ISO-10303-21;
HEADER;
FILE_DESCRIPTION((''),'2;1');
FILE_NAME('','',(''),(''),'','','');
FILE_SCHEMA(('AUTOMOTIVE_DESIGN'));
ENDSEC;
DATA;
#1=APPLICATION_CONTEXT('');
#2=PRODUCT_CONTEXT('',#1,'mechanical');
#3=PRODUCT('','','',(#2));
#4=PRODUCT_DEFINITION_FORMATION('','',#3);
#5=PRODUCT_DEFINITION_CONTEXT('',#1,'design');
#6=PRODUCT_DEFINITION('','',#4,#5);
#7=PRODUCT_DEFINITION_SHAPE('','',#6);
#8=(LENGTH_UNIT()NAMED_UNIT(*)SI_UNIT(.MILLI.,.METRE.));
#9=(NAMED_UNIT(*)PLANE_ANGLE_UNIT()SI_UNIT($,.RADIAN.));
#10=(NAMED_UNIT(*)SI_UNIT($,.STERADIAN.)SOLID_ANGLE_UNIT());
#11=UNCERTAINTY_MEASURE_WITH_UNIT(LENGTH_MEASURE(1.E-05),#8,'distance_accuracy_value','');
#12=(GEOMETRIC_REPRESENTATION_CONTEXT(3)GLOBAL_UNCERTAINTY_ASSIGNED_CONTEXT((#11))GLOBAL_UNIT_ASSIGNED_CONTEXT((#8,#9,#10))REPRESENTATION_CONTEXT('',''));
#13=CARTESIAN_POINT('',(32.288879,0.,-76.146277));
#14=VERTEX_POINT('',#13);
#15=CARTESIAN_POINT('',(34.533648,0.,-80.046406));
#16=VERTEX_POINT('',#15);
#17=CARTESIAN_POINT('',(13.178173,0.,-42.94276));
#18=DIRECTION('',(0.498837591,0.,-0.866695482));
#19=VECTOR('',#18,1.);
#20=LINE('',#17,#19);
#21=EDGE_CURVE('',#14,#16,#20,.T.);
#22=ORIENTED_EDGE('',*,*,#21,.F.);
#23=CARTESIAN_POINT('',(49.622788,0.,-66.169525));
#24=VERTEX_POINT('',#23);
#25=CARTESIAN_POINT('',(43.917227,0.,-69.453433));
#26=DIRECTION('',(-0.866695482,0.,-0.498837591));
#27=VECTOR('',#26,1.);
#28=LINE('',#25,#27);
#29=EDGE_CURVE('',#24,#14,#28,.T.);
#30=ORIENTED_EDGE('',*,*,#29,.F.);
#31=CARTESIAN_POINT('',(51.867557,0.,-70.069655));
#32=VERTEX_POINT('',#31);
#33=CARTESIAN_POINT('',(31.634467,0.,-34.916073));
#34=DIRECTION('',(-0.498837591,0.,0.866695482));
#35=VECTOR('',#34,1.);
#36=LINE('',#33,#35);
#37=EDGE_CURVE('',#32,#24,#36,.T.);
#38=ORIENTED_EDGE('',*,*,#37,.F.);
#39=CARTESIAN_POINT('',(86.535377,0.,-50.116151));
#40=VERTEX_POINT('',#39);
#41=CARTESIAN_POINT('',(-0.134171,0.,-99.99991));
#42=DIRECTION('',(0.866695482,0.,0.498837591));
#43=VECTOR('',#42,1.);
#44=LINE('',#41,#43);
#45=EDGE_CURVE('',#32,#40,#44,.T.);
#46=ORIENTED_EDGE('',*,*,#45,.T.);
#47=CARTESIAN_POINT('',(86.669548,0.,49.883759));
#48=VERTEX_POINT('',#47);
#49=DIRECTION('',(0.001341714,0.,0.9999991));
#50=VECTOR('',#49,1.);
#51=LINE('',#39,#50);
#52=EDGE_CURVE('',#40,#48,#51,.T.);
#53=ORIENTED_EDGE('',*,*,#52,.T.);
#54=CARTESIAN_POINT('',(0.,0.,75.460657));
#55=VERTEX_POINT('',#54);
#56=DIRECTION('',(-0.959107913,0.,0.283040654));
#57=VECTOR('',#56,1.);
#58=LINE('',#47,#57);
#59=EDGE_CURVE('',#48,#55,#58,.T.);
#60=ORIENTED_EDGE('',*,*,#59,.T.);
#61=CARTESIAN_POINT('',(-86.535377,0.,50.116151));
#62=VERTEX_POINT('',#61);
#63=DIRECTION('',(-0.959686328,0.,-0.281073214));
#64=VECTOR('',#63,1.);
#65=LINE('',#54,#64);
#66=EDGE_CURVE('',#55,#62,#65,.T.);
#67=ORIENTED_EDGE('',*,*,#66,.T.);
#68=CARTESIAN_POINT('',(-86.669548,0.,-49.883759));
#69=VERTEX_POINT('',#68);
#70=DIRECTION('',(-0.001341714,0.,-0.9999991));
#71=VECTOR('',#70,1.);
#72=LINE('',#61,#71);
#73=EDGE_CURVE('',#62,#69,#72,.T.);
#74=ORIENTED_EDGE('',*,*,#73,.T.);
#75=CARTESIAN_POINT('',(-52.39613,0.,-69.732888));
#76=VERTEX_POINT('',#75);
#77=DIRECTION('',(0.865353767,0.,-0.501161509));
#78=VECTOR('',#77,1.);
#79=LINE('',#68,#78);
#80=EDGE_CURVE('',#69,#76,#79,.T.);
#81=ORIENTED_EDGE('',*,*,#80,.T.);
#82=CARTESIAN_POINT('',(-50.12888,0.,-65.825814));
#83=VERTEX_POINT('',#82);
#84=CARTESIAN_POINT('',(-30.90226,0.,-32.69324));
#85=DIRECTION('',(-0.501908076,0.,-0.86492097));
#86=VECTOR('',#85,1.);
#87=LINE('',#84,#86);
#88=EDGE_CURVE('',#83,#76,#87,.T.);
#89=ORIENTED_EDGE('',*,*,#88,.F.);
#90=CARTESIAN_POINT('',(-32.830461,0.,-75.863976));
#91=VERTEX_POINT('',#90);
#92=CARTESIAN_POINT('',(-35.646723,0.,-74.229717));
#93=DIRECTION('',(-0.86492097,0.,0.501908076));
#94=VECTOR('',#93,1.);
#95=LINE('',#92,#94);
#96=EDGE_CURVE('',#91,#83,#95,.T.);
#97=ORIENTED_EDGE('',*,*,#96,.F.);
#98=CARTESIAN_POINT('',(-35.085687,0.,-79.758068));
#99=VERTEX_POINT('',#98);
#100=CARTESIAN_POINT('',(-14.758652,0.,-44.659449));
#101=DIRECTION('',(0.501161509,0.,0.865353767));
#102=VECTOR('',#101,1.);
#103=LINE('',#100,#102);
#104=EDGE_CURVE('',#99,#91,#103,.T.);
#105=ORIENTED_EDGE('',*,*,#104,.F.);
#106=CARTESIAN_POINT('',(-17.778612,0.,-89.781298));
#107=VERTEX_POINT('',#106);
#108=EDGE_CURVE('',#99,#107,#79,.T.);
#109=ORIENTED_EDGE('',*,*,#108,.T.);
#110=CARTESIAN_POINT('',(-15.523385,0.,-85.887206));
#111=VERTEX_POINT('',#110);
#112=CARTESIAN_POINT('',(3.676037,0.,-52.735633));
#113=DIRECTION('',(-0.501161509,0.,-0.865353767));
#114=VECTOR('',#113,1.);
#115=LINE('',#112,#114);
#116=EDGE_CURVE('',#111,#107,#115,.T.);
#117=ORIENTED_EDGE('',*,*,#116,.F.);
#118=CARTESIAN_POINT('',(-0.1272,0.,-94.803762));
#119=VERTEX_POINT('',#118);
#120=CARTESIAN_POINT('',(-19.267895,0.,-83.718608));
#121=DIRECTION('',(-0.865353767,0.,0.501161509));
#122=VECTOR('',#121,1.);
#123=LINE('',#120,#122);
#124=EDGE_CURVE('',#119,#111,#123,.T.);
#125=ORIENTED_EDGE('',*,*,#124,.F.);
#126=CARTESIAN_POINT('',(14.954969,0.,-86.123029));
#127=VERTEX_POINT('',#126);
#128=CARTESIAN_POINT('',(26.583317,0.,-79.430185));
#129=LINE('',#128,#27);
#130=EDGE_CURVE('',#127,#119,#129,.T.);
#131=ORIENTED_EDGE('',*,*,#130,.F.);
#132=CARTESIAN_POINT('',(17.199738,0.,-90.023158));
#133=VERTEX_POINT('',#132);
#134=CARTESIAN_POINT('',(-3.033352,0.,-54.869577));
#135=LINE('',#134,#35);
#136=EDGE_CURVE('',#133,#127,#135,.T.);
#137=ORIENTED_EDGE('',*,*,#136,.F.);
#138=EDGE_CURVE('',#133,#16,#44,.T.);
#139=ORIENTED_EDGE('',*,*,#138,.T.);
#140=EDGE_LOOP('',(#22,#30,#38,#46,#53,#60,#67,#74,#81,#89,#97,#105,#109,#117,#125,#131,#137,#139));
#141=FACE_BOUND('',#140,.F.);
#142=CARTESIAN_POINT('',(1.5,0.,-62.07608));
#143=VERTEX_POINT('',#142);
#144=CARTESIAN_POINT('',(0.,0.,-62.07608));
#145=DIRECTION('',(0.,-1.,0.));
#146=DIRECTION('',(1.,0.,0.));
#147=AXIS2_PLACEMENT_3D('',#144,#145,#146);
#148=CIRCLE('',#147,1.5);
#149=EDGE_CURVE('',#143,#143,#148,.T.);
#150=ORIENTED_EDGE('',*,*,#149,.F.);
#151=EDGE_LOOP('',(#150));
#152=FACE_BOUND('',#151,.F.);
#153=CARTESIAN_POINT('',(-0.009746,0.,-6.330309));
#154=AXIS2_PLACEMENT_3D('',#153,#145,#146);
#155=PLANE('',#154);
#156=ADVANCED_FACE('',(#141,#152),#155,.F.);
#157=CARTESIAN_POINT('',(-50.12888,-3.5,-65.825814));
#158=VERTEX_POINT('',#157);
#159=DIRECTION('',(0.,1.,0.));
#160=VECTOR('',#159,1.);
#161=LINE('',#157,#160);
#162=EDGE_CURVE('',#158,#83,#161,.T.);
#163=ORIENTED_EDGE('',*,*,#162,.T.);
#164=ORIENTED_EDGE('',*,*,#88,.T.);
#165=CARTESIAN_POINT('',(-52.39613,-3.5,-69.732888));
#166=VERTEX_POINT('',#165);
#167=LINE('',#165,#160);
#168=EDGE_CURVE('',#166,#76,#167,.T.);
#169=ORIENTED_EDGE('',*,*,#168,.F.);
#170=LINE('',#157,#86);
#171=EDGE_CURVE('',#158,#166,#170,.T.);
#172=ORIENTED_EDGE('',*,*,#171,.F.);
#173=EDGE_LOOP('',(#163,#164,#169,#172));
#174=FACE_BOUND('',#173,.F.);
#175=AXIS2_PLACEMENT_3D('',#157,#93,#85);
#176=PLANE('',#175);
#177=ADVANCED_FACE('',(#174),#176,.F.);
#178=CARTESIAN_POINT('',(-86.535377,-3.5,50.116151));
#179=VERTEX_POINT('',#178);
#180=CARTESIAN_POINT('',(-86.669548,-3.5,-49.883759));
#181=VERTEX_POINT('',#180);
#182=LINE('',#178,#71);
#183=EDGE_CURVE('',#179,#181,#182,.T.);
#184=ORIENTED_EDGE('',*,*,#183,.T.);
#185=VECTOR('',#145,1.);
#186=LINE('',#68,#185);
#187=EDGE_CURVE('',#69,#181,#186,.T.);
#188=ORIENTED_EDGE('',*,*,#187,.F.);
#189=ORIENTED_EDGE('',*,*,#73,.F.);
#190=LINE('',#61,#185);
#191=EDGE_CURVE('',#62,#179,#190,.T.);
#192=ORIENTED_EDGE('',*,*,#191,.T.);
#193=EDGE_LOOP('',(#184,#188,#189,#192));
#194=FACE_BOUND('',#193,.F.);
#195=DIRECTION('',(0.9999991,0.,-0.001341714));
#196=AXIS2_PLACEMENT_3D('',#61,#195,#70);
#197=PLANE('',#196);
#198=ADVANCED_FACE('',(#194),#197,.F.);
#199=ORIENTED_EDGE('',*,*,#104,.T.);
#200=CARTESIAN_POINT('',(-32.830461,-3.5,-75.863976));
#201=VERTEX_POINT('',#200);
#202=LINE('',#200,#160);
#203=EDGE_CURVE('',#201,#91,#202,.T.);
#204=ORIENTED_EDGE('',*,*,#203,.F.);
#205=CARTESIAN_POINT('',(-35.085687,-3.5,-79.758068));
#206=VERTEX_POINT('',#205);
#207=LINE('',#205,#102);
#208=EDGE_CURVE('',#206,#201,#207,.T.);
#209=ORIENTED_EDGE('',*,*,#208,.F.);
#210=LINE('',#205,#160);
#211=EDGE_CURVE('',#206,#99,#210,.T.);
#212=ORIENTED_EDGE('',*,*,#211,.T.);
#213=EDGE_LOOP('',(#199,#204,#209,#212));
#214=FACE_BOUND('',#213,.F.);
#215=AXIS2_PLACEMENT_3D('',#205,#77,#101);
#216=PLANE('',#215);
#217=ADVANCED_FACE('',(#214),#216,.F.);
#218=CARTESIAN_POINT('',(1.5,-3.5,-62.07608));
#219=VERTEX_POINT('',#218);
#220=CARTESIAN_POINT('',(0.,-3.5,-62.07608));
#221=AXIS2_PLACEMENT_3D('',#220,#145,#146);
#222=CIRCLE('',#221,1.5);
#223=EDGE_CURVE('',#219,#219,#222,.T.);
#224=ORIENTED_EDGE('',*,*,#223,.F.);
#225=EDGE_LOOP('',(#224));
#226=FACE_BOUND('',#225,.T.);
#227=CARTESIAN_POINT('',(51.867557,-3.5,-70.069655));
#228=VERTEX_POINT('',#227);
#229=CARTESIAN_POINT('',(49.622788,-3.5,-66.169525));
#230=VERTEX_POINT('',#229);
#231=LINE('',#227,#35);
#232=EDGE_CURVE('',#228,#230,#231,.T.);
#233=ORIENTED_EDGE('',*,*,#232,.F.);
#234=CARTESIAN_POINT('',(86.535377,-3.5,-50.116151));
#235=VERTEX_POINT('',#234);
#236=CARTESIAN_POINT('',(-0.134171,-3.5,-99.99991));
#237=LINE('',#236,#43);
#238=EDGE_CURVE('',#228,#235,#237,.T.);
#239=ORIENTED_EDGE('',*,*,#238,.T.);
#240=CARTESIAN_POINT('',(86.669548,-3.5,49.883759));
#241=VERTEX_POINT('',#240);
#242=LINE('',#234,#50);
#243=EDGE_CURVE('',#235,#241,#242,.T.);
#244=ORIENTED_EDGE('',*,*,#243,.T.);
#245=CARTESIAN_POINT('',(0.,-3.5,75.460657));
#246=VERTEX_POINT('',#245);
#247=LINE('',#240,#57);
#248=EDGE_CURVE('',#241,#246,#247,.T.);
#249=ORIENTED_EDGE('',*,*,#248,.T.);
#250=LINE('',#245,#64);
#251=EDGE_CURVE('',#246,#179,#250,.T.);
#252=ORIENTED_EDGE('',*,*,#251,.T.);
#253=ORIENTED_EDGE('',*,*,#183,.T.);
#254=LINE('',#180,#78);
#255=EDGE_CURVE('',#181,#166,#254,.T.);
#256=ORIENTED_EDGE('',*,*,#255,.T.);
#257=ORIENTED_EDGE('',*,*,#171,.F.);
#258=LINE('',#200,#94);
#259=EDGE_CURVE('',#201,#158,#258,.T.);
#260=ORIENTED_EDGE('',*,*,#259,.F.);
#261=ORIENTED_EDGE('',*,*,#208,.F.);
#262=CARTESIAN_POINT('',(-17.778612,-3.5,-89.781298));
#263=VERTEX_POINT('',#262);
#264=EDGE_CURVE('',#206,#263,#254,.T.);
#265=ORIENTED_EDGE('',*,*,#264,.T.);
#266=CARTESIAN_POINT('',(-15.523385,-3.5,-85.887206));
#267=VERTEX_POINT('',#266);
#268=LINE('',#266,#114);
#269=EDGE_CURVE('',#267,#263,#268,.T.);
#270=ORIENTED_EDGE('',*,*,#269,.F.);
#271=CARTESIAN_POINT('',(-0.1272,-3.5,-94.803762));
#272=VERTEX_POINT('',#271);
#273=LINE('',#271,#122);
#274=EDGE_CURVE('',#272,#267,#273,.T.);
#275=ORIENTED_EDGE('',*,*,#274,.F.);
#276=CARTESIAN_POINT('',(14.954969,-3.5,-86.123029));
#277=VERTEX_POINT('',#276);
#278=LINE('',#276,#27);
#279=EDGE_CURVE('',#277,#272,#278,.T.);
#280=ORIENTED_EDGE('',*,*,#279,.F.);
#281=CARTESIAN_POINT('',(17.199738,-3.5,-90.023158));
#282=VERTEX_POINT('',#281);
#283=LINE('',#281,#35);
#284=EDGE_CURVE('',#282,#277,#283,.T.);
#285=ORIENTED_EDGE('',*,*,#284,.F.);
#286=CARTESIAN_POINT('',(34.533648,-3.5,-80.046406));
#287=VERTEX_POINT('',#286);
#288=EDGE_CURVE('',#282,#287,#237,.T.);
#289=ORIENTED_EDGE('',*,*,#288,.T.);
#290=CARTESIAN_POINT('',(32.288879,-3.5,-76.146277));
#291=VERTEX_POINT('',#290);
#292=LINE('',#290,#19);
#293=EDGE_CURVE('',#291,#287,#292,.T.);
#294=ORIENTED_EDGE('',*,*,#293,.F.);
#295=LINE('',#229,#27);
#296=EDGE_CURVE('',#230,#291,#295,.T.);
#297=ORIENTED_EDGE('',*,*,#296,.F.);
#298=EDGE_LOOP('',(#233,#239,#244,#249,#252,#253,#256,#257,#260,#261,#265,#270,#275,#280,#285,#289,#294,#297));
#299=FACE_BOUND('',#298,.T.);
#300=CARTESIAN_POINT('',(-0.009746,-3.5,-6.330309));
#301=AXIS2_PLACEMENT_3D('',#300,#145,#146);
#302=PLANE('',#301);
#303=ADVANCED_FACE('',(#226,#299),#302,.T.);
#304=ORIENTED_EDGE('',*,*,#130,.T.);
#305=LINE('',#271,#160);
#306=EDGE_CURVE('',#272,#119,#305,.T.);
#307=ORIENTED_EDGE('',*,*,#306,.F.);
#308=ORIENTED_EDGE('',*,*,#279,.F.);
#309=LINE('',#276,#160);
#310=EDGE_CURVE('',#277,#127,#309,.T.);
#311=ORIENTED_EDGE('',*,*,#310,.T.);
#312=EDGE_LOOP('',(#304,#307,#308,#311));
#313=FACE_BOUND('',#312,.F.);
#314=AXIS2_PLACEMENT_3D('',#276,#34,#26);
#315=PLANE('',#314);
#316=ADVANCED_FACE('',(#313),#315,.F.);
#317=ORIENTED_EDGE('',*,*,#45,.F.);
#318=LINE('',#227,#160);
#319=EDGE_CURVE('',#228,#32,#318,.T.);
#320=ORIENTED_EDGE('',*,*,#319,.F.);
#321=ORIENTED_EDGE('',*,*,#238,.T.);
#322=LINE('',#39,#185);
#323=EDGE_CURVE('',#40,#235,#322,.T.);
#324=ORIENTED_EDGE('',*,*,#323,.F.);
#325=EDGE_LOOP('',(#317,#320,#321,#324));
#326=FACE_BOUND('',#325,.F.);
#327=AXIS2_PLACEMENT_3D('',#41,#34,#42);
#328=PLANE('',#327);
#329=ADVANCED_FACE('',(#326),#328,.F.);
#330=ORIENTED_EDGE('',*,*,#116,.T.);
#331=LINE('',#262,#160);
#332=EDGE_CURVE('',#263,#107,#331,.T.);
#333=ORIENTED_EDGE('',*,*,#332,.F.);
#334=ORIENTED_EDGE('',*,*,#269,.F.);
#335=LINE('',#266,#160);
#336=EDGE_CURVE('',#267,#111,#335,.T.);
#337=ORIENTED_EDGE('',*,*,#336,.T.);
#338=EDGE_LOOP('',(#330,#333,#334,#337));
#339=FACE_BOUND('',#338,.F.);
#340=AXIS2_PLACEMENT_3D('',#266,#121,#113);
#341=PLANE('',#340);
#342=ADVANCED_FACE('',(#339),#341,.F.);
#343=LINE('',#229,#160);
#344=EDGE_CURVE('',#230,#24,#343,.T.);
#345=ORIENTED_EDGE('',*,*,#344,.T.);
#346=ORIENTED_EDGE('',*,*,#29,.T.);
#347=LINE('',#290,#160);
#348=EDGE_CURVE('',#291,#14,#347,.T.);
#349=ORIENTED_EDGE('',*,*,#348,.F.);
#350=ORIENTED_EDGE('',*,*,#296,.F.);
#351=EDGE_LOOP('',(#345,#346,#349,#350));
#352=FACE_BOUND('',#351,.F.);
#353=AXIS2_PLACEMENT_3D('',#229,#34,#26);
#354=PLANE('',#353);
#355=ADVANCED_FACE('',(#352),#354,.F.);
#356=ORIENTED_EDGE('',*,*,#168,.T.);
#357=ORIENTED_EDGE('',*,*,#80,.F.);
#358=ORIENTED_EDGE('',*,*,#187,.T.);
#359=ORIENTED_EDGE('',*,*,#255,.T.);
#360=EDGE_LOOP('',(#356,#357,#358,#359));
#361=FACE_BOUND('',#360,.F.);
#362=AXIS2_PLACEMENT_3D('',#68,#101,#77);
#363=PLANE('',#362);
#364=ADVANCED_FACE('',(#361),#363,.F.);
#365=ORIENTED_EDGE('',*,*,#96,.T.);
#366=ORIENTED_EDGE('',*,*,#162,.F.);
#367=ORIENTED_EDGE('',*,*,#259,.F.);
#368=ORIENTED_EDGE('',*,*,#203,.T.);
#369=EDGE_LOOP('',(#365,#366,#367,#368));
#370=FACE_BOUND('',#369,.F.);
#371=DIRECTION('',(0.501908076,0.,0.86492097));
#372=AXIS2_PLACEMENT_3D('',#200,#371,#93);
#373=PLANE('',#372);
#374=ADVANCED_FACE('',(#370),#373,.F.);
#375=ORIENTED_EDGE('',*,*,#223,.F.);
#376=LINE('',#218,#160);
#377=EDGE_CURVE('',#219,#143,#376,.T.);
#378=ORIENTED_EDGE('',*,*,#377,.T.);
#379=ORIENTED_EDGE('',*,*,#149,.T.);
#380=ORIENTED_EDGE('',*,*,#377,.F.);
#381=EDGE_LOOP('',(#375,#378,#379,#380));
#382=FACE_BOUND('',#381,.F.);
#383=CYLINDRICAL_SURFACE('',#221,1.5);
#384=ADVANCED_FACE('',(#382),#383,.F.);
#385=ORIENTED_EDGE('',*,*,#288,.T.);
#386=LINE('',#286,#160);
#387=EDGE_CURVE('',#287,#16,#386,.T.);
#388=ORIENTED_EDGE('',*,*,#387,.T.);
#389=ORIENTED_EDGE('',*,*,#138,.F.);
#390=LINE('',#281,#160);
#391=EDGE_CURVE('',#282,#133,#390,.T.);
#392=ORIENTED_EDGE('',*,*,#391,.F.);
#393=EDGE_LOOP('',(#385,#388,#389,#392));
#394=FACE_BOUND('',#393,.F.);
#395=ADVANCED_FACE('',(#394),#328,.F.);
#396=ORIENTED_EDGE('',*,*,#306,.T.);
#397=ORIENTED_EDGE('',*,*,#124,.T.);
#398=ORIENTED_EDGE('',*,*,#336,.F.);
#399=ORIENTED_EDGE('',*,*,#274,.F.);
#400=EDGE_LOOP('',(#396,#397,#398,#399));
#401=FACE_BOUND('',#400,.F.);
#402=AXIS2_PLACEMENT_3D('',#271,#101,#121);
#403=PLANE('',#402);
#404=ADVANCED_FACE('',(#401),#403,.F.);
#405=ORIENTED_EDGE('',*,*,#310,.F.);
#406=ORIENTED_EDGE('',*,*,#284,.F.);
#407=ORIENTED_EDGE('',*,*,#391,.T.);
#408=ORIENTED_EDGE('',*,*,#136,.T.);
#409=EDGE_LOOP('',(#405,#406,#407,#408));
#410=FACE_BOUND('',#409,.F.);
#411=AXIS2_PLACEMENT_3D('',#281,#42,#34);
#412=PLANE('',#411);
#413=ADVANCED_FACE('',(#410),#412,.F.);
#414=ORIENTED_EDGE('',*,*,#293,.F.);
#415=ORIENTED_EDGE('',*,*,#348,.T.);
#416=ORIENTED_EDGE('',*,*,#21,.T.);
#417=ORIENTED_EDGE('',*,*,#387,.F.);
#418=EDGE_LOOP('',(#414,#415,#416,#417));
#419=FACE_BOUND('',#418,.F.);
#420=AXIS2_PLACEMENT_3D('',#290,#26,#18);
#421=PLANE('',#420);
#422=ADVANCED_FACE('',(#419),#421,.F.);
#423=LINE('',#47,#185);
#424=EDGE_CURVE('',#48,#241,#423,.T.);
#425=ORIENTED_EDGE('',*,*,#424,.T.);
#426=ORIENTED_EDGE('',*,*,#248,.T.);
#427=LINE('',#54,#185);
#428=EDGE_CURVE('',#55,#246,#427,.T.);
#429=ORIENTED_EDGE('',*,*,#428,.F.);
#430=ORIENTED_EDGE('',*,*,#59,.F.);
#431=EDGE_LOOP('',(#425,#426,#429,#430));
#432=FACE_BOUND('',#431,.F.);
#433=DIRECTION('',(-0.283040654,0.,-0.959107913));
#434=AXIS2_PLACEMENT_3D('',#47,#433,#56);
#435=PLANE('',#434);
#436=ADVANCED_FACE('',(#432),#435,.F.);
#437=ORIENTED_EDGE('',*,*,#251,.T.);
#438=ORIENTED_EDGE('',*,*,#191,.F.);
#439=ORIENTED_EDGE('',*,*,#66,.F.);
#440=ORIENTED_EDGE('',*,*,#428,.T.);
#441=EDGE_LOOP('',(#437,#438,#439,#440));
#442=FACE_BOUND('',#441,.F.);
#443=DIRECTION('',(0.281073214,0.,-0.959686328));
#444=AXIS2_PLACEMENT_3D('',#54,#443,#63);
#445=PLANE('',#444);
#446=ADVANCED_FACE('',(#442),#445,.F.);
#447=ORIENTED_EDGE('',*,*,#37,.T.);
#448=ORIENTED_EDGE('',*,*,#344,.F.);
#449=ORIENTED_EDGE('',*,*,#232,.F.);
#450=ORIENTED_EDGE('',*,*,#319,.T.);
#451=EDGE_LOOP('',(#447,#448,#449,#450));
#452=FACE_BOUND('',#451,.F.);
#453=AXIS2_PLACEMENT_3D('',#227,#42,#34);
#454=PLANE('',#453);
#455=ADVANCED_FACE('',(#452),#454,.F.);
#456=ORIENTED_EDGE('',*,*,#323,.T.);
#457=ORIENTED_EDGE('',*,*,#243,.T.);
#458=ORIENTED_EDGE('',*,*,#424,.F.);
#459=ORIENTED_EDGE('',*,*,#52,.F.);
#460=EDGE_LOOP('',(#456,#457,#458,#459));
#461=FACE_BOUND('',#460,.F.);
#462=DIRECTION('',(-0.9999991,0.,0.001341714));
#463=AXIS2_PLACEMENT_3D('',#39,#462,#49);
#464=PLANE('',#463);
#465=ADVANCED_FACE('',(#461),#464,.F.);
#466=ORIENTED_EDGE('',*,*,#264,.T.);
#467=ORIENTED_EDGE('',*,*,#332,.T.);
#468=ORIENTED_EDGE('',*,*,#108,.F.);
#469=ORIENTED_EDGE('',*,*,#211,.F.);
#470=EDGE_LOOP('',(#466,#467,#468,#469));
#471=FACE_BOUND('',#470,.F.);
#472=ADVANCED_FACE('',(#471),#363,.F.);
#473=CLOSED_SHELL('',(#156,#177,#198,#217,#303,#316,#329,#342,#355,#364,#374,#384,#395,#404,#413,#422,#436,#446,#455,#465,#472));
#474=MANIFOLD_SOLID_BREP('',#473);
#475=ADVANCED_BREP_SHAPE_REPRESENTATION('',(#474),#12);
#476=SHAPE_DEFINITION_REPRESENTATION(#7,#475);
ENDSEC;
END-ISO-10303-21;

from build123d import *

# Parameters (mm, degrees)
F1_DEPTH = 3.5
F2_R     = 1.5
F3_DEPTH = 25


# Not quite as in the source:
# - a feature names something its author has since deleted; it is built from what else it names


with BuildPart() as f1:
    # F0 (on Front) → F1 (new body)
    with BuildSketch(Plane.XZ):
        Polygon((0, 75.4606574774), (-86.5353767039, 50.1161508768), (-86.6695481512, -49.8837591133), (-0.1341714472, -99.9999099901), (86.5353767039, -50.1161508768), (86.6695481512, 49.8837591133), align=None)
    extrude(amount=F1_DEPTH)

    # F2 (on face) → F3 (cut)
    with BuildSketch(Plane.XZ.offset(3.5)):
        Polygon((0.1341714472, 99.9999099901), (-17.199738183, 90.0231581674), (-14.9549690229, 86.1230285006), (0.1271996943, 94.8037622444), (-2.1236443549, 96.1073174408), align=None)
        Polygon((17.4386577754, 89.9781792171), (0.1341714472, 99.9999099901), (2.3789406073, 96.0997803233), (0.1271996943, 94.8037622444), (15.1834309859, 86.0840872654), align=None)
        Polygon((2.3789406073, 96.0997803233), (0.1341714472, 99.9999099901), (-2.1236443549, 96.1073174408), (0.1271996943, 94.8037622444), align=None)
        Polygon((-50.1288800257, -65.8258142354), (-52.3961295985, -69.7328876509), (-35.0856874223, -79.7580676974), (-32.8304606328, -75.8639757457), align=None)
        Polygon((-15.5233852921, -85.8872059211), (-17.7786120815, -89.7812978727), (-0.4715367407, -99.8045280481), (-0.3587329239, -99.6097501051), (-2.3789406073, -96.0997803233), (-0.1271996943, -94.8037622444), align=None)
        Polygon((-0.3587329239, -99.6097501051), (-0.4715367407, -99.8045280481), (-0.1341714472, -99.9999099901), align=None)
        Polygon((14.9549690229, -86.1230285006), (-0.1271996943, -94.8037622444), (1.7836900487, -95.9104360964), (-0.3587329239, -99.6097501051), (-0.1341714472, -99.9999099901), (17.199738183, -90.0231581674), align=None)
        Polygon((1.7836900487, -95.9104360964), (-0.1271996943, -94.8037622444), (-2.3789406073, -96.0997803233), (-0.3587329239, -99.6097501051), align=None)
        Polygon((34.5336478132, -80.0464063448), (51.8675574435, -70.0696545221), (49.6227882834, -66.1695248553), (32.2888786531, -76.146276678), align=None)
        with Locations((0, -62.0760797054)):
            Circle(F2_R)
    extrude(amount=-F3_DEPTH, mode=Mode.SUBTRACT)


solid = f1.part
